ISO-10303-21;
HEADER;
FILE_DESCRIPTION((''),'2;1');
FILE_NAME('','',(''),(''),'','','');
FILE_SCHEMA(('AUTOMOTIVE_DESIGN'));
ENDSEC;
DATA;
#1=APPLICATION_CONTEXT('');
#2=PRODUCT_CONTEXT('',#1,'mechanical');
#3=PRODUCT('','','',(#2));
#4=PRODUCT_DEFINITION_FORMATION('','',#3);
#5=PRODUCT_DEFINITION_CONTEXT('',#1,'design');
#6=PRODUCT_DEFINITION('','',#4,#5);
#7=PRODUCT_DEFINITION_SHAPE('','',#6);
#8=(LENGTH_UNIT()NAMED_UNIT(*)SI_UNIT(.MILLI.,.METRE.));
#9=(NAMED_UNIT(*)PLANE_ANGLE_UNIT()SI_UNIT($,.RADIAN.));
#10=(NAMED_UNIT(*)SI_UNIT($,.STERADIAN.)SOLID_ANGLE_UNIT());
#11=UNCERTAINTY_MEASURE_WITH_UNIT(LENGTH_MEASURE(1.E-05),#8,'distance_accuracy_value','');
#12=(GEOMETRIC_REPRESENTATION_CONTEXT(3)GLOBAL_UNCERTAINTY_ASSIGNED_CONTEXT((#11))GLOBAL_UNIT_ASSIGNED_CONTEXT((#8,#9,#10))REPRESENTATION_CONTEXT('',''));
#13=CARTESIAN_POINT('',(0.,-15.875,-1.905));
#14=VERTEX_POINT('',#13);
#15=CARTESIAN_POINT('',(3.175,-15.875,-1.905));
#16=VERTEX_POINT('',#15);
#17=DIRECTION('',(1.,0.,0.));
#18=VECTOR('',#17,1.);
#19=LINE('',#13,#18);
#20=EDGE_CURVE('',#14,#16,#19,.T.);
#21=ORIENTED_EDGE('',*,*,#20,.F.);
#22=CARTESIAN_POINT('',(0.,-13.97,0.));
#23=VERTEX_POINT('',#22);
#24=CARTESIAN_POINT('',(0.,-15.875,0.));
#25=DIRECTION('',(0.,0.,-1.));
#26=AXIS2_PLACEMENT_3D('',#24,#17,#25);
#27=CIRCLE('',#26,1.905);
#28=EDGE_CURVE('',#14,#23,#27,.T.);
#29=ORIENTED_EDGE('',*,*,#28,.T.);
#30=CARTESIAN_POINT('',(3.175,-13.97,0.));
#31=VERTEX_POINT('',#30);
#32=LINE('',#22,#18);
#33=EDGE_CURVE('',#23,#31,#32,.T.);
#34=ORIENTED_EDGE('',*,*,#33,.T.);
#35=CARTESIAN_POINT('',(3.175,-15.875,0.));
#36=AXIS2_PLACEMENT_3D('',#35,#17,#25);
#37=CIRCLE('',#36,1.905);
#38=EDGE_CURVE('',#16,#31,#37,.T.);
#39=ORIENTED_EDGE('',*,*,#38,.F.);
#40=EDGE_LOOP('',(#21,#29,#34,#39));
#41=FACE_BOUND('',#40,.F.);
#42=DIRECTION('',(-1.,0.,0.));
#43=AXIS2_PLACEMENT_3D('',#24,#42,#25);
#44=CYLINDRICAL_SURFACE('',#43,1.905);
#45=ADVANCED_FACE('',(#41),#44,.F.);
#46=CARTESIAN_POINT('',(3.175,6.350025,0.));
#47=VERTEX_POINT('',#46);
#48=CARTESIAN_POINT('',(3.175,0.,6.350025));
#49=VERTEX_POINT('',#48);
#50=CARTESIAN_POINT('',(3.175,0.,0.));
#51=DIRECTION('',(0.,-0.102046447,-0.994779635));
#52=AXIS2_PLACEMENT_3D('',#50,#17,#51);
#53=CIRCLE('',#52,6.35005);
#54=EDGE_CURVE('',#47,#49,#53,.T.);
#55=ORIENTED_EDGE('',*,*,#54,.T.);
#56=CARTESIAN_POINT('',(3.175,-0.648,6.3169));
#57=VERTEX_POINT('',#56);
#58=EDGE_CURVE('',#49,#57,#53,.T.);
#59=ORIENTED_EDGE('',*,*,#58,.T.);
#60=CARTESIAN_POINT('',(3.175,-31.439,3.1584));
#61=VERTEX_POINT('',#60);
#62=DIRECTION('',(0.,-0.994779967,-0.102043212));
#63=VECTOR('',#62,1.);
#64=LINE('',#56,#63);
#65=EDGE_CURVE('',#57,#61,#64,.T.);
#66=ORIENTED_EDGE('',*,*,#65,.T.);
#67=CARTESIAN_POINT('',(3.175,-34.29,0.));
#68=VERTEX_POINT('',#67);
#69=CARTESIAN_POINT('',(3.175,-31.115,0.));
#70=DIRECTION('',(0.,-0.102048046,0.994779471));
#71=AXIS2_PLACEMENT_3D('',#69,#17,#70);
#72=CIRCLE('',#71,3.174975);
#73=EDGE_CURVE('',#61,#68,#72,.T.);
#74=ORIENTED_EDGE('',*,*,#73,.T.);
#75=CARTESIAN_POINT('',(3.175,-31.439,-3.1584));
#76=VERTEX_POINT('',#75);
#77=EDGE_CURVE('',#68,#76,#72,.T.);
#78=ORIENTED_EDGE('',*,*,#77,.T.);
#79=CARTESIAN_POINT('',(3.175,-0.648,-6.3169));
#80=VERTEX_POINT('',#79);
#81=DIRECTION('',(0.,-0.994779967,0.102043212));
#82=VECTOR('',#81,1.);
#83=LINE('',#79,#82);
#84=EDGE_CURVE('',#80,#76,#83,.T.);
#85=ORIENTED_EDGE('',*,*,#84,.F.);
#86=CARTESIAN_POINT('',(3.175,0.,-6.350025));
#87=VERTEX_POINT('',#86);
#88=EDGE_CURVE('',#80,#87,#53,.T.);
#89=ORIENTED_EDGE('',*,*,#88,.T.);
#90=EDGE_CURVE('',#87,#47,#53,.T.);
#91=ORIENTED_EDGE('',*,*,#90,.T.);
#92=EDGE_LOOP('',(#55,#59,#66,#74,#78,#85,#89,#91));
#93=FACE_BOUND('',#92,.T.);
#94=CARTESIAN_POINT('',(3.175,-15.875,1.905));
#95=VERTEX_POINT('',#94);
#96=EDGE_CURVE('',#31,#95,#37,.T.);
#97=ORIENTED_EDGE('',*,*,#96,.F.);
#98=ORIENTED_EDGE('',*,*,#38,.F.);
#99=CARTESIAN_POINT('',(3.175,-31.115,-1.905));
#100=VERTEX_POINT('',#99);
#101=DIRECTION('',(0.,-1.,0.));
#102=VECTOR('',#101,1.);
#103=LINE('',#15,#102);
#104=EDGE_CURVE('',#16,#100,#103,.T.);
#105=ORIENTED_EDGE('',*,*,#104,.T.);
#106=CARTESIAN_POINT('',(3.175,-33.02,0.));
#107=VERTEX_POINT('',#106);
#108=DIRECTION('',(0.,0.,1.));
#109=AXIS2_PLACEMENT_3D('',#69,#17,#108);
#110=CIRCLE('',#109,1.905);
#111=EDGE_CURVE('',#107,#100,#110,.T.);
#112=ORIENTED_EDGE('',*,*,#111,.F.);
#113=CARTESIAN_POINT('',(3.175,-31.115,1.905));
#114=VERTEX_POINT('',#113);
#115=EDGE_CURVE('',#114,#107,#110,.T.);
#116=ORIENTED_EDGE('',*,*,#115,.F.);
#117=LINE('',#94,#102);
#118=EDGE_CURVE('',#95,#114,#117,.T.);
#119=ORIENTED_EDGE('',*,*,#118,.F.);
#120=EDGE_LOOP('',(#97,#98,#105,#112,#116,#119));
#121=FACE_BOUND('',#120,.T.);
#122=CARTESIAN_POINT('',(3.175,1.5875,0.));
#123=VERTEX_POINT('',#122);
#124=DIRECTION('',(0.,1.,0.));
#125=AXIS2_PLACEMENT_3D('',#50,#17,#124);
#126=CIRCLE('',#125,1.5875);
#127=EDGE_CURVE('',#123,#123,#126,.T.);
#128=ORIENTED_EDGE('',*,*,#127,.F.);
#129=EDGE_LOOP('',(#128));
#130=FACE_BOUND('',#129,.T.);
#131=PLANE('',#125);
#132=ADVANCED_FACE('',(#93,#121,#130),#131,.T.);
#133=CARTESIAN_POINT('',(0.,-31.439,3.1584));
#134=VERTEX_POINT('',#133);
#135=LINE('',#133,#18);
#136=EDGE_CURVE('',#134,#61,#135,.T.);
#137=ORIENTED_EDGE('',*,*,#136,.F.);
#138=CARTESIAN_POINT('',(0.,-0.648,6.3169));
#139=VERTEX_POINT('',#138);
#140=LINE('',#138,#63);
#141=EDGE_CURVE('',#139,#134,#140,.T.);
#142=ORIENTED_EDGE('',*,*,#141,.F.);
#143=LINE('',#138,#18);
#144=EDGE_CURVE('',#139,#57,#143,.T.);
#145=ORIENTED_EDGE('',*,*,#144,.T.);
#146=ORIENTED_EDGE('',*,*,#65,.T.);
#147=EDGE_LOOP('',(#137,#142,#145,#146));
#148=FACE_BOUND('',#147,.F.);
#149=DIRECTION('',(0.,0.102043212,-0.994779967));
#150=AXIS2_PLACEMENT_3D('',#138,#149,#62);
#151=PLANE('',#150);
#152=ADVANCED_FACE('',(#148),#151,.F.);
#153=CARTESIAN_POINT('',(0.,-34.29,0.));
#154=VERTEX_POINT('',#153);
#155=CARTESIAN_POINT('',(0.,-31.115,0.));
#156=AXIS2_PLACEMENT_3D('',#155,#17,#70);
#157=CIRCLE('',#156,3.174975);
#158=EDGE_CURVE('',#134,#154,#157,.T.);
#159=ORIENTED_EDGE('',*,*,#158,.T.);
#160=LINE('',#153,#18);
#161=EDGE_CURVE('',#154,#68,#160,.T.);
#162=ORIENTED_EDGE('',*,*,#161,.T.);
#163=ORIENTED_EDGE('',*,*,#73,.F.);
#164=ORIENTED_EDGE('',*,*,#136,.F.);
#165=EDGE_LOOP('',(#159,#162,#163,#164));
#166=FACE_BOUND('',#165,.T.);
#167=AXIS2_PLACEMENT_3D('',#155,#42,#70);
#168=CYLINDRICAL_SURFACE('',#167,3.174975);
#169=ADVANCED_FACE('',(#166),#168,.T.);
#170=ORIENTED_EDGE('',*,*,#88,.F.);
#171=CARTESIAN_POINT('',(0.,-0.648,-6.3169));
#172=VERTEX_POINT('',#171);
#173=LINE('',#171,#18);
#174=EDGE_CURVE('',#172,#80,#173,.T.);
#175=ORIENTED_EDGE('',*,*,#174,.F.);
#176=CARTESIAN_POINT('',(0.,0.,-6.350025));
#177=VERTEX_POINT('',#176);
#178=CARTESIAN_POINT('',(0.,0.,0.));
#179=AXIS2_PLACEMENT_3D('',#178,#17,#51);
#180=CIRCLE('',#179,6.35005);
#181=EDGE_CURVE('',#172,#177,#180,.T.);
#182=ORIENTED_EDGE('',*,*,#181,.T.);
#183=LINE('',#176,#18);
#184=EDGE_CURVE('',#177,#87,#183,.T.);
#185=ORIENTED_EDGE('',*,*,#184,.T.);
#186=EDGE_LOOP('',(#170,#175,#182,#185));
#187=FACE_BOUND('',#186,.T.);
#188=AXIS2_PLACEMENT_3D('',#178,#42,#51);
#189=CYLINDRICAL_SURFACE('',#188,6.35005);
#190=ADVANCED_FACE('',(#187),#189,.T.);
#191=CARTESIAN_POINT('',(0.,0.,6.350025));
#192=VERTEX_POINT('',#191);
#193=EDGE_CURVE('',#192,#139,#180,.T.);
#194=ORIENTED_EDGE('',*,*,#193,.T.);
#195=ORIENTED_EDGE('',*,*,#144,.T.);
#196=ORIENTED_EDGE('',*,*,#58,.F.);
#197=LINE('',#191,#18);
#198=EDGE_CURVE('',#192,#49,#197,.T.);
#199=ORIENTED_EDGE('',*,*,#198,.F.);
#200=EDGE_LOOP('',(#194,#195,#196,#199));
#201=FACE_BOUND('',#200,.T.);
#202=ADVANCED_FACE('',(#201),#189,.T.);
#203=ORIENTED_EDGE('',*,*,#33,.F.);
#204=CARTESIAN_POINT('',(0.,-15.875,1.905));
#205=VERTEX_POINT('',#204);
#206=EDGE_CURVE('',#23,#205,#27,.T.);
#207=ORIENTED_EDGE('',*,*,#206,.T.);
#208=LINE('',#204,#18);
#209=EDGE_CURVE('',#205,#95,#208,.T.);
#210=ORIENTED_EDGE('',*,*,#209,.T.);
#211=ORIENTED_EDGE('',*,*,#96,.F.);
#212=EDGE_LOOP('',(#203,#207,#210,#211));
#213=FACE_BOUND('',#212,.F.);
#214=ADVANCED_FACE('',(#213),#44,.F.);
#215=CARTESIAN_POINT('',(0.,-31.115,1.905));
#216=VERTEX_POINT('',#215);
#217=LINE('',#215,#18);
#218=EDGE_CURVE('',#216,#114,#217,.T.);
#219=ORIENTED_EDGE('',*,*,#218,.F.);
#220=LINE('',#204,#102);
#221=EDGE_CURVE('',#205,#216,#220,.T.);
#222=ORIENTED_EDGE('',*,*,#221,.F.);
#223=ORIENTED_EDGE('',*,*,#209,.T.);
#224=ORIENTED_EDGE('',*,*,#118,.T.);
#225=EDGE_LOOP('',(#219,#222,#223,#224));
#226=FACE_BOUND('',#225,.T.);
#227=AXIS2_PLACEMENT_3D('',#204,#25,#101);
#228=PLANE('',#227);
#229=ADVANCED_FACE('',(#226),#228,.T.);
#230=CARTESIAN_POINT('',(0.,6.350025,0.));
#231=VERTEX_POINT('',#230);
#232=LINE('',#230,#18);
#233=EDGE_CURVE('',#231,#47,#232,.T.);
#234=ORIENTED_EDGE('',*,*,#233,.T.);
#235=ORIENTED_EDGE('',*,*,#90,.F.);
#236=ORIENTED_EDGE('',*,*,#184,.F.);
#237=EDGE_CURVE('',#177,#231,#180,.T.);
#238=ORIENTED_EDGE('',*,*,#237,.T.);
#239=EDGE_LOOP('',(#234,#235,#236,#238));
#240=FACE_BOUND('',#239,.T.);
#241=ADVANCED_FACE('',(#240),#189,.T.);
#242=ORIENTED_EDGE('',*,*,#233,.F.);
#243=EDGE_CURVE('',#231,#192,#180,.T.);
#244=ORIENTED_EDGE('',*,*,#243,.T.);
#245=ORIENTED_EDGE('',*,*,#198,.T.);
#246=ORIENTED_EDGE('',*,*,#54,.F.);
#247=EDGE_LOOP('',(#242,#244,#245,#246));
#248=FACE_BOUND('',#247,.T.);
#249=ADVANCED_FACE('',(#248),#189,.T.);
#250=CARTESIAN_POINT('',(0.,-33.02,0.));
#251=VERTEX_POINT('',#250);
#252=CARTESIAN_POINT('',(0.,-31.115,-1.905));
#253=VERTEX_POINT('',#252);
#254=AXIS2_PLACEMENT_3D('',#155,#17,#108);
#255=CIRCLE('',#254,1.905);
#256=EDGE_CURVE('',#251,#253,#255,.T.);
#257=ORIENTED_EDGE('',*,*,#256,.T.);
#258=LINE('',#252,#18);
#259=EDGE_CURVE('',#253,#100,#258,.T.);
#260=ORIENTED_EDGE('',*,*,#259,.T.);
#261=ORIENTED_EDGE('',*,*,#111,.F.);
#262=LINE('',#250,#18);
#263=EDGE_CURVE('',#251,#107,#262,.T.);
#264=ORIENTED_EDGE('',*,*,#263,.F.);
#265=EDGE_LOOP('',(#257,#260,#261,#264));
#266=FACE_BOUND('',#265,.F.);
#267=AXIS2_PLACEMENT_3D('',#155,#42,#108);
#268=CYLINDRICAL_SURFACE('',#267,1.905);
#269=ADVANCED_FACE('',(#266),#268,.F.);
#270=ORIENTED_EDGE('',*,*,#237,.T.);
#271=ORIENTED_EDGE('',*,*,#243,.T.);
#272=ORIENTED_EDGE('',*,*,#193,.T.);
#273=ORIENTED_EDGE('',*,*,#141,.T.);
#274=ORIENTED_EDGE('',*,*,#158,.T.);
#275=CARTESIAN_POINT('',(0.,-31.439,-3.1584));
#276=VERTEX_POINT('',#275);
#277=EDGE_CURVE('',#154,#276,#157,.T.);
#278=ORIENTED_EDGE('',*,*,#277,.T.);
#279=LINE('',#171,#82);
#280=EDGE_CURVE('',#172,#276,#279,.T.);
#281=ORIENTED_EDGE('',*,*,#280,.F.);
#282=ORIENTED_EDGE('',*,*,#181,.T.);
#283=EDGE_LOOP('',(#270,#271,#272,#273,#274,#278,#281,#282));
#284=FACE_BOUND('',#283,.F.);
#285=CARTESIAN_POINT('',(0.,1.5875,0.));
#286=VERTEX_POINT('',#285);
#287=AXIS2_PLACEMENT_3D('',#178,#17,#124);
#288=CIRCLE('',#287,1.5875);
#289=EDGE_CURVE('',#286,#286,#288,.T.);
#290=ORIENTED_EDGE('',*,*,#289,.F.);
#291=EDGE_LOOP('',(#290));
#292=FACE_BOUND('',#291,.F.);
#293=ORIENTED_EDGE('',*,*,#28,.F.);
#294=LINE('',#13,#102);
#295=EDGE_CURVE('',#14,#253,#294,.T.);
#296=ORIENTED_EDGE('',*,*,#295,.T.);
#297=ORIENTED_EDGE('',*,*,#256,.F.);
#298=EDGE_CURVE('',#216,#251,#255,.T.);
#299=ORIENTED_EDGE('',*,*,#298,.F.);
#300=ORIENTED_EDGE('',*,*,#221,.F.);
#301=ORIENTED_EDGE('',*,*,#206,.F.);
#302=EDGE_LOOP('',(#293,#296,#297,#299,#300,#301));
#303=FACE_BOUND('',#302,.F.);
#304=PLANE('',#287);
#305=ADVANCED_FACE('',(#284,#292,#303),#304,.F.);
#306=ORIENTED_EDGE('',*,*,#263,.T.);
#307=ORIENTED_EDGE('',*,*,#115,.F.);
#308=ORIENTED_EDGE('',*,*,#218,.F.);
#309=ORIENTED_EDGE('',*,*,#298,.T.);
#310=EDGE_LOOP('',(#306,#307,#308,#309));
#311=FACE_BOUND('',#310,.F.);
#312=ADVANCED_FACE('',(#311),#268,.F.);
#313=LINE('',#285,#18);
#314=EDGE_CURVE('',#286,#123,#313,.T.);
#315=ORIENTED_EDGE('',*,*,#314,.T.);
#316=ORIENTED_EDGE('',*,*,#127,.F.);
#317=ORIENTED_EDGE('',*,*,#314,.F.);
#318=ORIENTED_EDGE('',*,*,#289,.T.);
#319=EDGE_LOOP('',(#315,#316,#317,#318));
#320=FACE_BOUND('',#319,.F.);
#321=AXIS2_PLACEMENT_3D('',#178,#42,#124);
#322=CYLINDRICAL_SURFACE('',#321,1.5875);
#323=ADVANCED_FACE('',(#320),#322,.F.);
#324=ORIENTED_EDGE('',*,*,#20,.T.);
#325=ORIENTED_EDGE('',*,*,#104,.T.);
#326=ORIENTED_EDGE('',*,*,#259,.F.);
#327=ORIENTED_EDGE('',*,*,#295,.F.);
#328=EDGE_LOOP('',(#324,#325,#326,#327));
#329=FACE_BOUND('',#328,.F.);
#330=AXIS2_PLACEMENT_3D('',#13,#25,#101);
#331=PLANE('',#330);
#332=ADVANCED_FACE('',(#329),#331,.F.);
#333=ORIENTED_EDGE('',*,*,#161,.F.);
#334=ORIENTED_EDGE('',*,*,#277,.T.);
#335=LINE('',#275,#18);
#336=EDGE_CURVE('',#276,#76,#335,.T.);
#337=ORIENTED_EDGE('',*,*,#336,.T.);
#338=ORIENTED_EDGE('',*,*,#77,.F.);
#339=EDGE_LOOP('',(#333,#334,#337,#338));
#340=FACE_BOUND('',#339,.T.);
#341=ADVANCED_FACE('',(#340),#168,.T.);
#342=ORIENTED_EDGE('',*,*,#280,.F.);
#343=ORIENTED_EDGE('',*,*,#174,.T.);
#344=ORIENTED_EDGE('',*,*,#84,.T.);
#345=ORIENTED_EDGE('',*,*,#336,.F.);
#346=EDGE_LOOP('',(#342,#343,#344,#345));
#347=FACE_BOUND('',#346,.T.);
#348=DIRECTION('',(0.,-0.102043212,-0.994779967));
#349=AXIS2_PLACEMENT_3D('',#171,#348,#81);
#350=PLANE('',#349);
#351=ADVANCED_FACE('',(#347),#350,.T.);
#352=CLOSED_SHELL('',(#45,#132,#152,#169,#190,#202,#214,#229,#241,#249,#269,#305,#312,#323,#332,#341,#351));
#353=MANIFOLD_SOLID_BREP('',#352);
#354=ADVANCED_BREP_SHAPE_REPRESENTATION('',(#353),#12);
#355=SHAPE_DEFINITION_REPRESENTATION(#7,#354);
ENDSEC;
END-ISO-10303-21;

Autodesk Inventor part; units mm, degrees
ref_plane "YZ Plane" through (0, 0, 0) normal (1, 0, 0) x (0, 1, 0)
ref_plane "XZ Plane" through (0, 0, 0) normal (0, 1, 0) x (-1, 0, 0)
ref_plane "XY Plane" through (0, 0, 0) normal (0, 0, 1) x (1, 0, 0)
sketch "Sketch2" plane through (0, 0, 0) normal (1, 0, 0) x (0, 1, 0)
  arc A0 (-0.648, -6.3169) -> (-0.648, 6.3169) centre (0, 0) ccw
  line L0 (6.35, 6.35) -> (-34.29, 6.35)
  line L1 (-34.29, 6.35) -> (-34.29, -6.35)
  line L2 (-34.29, -6.35) -> (6.35, -6.35)
  line L3 (6.35, -6.35) -> (6.35, 6.35)
  circle A1 centre (0, 0) radius 1.5875
  line L4 (-34.29, 0) -> (-33.02, 0)
  arc A2 (-31.115, 1.905) -> (-31.115, -1.905) centre (-31.115, 0) ccw
  arc A3 (-31.439, 3.1584) -> (-31.439, -3.1584) centre (-31.115, 0) ccw
  line L5 (-33.02, 0) -> (-13.97, 0)
  arc A4 (-15.875, -1.905) -> (-15.875, 1.905) centre (-15.875, 0) ccw
  line L6 (-15.875, -1.905) -> (-31.115, -1.905)
  line L7 (-15.875, 1.905) -> (-31.115, 1.905)
  line L8 (-0.648, -6.3169) -> (-31.439, -3.1584)
  line L9 (-0.648, 6.3169) -> (-31.439, 3.1584)
  dimension "d16" = 12.7
  dimension "d17" = 40.64
  dimension "d18" = 3.175
  dimension "d19" = 1.27
  dimension "d20" = 3.81
  dimension "d21" = 6.35
  dimension "d22" = 19.05
  dimension "d23" = 3.81
extrude "Extrusion3" add sketch "Sketch2" along normal blind 3.175 contours L8 A3 L9 A0
properties part number "CURM_Caterpillar_leg"
